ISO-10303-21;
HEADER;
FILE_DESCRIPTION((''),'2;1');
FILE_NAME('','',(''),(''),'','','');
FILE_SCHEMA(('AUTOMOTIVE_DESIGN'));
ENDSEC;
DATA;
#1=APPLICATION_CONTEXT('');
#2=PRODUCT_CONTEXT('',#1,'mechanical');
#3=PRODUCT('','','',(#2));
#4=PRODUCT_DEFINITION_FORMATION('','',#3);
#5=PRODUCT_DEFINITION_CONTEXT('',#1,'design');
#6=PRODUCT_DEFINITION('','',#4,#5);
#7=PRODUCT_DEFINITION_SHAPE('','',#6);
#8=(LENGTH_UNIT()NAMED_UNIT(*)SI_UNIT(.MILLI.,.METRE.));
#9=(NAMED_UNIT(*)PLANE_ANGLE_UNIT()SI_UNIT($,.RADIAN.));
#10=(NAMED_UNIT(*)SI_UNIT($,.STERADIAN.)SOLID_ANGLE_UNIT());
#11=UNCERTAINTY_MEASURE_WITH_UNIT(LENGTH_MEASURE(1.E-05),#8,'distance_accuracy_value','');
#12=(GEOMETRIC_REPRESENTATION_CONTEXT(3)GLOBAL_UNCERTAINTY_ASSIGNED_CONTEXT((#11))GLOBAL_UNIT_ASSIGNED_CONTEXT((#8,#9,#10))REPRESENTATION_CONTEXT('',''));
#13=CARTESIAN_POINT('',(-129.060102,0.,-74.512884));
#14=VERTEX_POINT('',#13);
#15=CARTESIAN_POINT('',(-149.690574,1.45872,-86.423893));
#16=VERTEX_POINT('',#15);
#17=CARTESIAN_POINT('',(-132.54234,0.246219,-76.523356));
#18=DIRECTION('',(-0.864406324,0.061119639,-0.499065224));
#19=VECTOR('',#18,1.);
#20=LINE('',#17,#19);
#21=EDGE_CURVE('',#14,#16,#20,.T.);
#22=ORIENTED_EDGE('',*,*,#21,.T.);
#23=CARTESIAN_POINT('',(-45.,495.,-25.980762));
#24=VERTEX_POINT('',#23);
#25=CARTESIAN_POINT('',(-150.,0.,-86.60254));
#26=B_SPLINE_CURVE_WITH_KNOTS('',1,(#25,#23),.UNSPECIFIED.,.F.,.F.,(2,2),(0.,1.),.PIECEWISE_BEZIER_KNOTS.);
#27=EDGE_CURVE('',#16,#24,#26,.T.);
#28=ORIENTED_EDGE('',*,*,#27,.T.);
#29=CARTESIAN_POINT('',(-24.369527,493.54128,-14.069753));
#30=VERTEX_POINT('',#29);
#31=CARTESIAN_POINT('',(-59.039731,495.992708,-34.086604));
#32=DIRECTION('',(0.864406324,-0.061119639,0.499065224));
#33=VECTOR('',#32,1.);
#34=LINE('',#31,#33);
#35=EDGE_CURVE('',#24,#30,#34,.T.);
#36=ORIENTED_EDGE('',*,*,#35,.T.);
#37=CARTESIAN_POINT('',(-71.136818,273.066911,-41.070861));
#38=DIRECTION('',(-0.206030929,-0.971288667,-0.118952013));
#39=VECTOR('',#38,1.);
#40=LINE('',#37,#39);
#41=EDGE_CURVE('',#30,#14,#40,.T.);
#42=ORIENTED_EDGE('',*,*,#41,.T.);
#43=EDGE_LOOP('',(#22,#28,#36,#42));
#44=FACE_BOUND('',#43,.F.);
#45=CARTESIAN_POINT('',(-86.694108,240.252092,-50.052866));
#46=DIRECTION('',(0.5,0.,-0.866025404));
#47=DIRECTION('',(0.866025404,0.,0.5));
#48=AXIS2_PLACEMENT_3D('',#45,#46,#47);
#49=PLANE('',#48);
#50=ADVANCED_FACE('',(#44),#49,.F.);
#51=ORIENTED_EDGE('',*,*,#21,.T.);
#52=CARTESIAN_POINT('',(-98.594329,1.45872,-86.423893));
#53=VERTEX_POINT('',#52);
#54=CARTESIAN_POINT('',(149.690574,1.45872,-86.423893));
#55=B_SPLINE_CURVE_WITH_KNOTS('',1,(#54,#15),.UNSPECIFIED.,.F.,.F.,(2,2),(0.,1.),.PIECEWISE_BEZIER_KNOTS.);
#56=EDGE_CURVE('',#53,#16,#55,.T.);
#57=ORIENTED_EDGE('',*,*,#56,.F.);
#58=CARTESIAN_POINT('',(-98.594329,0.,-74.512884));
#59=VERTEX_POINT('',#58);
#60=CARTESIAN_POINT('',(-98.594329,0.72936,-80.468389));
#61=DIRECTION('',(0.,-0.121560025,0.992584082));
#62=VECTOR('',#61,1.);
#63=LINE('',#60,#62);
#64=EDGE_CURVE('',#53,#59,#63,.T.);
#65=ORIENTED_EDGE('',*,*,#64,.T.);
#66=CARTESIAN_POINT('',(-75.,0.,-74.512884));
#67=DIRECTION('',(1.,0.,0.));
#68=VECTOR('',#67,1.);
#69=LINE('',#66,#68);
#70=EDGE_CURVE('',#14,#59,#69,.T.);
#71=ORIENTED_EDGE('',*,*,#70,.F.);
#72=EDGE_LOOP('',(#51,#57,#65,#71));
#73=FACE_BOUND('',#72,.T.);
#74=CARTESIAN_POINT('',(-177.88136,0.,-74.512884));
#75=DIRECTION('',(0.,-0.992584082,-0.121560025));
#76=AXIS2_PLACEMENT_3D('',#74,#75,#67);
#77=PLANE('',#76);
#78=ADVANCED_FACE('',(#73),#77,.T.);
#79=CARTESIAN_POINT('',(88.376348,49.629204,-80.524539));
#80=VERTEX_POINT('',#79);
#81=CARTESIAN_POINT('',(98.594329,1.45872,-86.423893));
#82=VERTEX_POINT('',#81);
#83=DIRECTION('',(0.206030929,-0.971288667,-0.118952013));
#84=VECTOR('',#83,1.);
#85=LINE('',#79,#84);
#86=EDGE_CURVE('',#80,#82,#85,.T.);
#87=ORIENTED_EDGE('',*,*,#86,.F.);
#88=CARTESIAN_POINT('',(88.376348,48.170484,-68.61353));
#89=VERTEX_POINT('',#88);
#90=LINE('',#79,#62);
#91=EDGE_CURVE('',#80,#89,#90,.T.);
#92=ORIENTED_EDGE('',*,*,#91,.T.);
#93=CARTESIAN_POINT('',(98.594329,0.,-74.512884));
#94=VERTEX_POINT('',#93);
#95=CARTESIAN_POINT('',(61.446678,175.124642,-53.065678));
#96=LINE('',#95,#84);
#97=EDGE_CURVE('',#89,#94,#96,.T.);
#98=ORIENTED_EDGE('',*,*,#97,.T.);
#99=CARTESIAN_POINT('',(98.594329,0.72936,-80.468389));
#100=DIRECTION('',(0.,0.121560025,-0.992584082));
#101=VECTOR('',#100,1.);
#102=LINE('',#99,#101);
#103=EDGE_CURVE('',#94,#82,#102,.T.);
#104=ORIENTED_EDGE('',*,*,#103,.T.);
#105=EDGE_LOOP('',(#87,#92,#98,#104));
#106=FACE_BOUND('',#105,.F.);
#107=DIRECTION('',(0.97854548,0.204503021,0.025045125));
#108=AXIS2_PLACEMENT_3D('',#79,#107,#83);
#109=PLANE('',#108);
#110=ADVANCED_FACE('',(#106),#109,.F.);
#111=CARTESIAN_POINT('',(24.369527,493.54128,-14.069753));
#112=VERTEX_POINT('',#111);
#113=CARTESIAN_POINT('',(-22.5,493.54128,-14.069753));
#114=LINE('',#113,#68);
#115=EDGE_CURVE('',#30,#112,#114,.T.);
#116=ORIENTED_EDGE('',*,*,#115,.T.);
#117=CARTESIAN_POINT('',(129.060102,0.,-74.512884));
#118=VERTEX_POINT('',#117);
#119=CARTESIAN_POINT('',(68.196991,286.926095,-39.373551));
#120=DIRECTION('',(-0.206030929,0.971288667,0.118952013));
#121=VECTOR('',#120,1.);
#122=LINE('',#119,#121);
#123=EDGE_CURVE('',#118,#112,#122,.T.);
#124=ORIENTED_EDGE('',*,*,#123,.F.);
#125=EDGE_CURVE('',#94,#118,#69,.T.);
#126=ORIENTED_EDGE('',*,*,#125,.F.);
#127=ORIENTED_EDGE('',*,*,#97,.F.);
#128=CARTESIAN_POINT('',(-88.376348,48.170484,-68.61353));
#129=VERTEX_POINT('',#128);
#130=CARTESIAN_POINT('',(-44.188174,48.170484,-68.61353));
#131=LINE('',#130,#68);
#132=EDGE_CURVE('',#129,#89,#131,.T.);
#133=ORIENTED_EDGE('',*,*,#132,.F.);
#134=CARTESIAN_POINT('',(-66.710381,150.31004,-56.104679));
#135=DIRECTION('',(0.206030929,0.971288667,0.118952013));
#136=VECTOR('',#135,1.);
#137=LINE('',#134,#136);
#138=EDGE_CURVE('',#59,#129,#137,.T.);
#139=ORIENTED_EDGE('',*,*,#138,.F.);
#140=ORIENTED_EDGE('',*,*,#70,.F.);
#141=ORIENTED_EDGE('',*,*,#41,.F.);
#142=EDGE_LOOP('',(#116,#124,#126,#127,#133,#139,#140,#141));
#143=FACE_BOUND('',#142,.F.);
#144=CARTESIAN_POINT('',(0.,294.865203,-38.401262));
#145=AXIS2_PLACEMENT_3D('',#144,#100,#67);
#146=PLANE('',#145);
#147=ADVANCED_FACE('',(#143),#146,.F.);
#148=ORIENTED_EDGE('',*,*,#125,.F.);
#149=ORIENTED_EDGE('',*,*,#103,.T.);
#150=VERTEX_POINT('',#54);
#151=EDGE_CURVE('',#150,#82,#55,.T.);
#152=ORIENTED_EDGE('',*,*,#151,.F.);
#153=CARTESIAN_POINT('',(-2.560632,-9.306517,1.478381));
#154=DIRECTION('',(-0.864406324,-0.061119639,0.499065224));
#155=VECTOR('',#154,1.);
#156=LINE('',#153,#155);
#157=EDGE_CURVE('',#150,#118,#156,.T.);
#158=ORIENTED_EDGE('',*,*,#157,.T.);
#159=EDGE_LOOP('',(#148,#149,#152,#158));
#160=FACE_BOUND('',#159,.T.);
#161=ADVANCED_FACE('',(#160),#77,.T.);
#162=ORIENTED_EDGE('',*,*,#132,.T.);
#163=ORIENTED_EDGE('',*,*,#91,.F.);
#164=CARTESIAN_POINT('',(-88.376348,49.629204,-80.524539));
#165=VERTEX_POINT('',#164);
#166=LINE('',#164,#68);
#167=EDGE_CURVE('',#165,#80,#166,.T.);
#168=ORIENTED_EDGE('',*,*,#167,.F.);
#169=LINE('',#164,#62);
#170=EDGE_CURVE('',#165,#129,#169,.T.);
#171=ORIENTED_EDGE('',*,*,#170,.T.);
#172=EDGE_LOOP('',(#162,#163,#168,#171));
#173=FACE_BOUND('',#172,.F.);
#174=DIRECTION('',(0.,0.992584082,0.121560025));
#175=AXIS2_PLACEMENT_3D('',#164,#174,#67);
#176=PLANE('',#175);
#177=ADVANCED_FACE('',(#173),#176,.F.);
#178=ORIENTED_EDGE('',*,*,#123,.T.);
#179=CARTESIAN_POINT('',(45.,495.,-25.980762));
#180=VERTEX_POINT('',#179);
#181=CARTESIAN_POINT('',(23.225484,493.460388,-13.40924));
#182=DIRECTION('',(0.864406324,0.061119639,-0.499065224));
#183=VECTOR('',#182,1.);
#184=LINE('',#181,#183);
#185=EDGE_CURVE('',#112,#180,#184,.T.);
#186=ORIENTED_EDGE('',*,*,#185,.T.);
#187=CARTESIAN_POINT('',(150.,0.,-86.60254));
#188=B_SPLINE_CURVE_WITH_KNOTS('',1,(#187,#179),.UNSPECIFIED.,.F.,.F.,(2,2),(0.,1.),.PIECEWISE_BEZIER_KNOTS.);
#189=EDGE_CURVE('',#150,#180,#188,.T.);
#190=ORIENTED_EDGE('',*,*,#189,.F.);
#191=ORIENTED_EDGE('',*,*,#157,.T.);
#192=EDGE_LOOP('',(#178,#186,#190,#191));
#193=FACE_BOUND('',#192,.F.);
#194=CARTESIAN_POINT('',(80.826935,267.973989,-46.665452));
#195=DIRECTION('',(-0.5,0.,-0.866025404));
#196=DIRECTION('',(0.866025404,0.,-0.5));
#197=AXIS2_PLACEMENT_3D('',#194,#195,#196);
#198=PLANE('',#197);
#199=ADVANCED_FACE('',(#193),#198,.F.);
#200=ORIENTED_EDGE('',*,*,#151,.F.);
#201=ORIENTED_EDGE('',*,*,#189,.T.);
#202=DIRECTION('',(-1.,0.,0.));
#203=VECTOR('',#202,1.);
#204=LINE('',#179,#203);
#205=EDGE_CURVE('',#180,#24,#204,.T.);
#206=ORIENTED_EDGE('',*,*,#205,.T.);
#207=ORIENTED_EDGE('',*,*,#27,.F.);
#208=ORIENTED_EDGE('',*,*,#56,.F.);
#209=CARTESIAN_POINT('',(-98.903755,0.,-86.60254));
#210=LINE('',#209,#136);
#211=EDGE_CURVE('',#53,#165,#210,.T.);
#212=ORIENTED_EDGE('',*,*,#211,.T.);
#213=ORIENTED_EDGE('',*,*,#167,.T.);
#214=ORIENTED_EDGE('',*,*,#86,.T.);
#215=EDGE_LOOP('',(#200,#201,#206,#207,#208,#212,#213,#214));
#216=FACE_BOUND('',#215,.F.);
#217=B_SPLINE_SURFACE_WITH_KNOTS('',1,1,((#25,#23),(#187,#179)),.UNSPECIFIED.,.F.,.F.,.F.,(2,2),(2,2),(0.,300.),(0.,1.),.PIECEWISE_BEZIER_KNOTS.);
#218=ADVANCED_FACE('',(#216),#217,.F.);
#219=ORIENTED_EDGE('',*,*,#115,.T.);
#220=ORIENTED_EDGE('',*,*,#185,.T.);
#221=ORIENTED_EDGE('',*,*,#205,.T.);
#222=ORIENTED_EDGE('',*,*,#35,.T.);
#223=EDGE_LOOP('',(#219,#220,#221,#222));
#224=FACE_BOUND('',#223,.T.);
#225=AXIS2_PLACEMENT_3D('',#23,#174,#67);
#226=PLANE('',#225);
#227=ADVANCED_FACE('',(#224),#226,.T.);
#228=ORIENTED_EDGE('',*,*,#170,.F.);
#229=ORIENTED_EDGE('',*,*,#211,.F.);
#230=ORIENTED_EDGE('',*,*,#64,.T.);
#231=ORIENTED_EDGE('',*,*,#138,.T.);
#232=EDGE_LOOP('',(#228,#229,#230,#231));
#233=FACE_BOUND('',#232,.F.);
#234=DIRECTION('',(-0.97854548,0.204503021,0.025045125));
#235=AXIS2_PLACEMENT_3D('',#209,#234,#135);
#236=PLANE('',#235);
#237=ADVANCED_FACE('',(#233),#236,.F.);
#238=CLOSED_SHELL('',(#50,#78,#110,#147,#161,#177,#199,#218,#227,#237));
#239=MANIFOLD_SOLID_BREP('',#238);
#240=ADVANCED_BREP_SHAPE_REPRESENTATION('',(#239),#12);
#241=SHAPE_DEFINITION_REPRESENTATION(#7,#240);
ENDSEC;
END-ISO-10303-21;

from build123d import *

# Parameters (mm, degrees)
F7_R      = 411.1162199172
F8_DEPTH  = 245.8819093104
F10_DEPTH = 72.1732122579
F13_R     = 303.0795059163
F14_DEPTH = 62.9709492631
F16_R     = 347.3761175619
F17_DEPTH = 62.9709492631
F18_W     = 90
F18_H     = 35.3622667967
F19_DEPTH = 72.1732122579
F20_W     = 378.0467361212
F20_H     = 51.6974163429
F21_DEPTH = 72.1732122579


with BuildPart() as f5:
    # F1 (on Front) → F5 section 0
    with BuildSketch(Plane.XZ):
        Polygon((-150, -86.6025403784), (150, -86.6025403784), (0, 173.2050807569), align=None)
    # F4 (on line) → F5 section 1
    with BuildSketch(Plane(origin=(0, 495, 0), x_dir=(-1, 0, 0), z_dir=(0, 1, 0))):
        Polygon((-45, -25.9807621135), (45, -25.9807621135), (0, 51.9615242271), align=None)
    loft()

    # F7 (on face) → F8 (cut, through all)
    with BuildSketch(Plane(origin=(0, 8.9906162556, -73.4118195457), x_dir=(1, 0, 0), z_dir=(0, 0.1215600245, -0.9925840823))):
        with Locations((0, -288.0104482174)):
            Circle(F7_R)
    extrude(amount=-F8_DEPTH, mode=Mode.SUBTRACT)

    # F9 (on face) → F10 (cut, through all)
    with BuildSketch(Plane(origin=(0, 10.4493365501, -85.3228285333), x_dir=(1, 0, 0), z_dir=(0, 0.1215600245, -0.9925840823))):
        Polygon((88.3763476395, -39.4725930665), (98.9037545729, 10.5274069335), (-98.9037545729, 10.5274069335), (-88.3763476395, -39.4725930665), align=None)
    extrude(amount=-F10_DEPTH, mode=Mode.SUBTRACT)

    # F13 (on face) → F14 (cut, through all)
    with BuildSketch(Plane(origin=(0, 0, 0), x_dir=(0.8660254038, 0, 0.5), z_dir=(0.5, 0, -0.8660254038))):
        with Locations((-100.1057326794, -240.2520924807)):
            Circle(F13_R)
    extrude(amount=-F14_DEPTH, mode=Mode.SUBTRACT)

    # F16 (on face) → F17 (cut, through all)
    with BuildSketch(Plane(origin=(0, 0, 0), x_dir=(0.8660254038, 0, -0.5), z_dir=(-0.5, 0, -0.8660254038))):
        with Locations((93.3309048414, -267.9739892483)):
            Circle(F16_R)
    extrude(amount=-F17_DEPTH, mode=Mode.SUBTRACT)

    # F18 (on face) → F19 (cut, through all)
    with BuildSketch(Plane(origin=(0, 10.4493365501, -85.3228285333), x_dir=(1, 0, 0), z_dir=(0, 0.1215600245, -0.9925840823))):
        with Locations((0, -505.8520320565)):
            Rectangle(F18_W, F18_H)
    extrude(amount=-F19_DEPTH, mode=Mode.SUBTRACT)

    # F20 (on face) → F21 (cut, through all)
    with BuildSketch(Plane(origin=(0, 8.9906162556, -73.4118195457), x_dir=(1, 0, 0), z_dir=(0, -0.1215600245, 0.9925840823))):
        with Locations((11.1420080066, -34.9064962379)):
            Rectangle(F20_W, F20_H)
    extrude(amount=-F21_DEPTH, mode=Mode.SUBTRACT)


solid = f5.part
